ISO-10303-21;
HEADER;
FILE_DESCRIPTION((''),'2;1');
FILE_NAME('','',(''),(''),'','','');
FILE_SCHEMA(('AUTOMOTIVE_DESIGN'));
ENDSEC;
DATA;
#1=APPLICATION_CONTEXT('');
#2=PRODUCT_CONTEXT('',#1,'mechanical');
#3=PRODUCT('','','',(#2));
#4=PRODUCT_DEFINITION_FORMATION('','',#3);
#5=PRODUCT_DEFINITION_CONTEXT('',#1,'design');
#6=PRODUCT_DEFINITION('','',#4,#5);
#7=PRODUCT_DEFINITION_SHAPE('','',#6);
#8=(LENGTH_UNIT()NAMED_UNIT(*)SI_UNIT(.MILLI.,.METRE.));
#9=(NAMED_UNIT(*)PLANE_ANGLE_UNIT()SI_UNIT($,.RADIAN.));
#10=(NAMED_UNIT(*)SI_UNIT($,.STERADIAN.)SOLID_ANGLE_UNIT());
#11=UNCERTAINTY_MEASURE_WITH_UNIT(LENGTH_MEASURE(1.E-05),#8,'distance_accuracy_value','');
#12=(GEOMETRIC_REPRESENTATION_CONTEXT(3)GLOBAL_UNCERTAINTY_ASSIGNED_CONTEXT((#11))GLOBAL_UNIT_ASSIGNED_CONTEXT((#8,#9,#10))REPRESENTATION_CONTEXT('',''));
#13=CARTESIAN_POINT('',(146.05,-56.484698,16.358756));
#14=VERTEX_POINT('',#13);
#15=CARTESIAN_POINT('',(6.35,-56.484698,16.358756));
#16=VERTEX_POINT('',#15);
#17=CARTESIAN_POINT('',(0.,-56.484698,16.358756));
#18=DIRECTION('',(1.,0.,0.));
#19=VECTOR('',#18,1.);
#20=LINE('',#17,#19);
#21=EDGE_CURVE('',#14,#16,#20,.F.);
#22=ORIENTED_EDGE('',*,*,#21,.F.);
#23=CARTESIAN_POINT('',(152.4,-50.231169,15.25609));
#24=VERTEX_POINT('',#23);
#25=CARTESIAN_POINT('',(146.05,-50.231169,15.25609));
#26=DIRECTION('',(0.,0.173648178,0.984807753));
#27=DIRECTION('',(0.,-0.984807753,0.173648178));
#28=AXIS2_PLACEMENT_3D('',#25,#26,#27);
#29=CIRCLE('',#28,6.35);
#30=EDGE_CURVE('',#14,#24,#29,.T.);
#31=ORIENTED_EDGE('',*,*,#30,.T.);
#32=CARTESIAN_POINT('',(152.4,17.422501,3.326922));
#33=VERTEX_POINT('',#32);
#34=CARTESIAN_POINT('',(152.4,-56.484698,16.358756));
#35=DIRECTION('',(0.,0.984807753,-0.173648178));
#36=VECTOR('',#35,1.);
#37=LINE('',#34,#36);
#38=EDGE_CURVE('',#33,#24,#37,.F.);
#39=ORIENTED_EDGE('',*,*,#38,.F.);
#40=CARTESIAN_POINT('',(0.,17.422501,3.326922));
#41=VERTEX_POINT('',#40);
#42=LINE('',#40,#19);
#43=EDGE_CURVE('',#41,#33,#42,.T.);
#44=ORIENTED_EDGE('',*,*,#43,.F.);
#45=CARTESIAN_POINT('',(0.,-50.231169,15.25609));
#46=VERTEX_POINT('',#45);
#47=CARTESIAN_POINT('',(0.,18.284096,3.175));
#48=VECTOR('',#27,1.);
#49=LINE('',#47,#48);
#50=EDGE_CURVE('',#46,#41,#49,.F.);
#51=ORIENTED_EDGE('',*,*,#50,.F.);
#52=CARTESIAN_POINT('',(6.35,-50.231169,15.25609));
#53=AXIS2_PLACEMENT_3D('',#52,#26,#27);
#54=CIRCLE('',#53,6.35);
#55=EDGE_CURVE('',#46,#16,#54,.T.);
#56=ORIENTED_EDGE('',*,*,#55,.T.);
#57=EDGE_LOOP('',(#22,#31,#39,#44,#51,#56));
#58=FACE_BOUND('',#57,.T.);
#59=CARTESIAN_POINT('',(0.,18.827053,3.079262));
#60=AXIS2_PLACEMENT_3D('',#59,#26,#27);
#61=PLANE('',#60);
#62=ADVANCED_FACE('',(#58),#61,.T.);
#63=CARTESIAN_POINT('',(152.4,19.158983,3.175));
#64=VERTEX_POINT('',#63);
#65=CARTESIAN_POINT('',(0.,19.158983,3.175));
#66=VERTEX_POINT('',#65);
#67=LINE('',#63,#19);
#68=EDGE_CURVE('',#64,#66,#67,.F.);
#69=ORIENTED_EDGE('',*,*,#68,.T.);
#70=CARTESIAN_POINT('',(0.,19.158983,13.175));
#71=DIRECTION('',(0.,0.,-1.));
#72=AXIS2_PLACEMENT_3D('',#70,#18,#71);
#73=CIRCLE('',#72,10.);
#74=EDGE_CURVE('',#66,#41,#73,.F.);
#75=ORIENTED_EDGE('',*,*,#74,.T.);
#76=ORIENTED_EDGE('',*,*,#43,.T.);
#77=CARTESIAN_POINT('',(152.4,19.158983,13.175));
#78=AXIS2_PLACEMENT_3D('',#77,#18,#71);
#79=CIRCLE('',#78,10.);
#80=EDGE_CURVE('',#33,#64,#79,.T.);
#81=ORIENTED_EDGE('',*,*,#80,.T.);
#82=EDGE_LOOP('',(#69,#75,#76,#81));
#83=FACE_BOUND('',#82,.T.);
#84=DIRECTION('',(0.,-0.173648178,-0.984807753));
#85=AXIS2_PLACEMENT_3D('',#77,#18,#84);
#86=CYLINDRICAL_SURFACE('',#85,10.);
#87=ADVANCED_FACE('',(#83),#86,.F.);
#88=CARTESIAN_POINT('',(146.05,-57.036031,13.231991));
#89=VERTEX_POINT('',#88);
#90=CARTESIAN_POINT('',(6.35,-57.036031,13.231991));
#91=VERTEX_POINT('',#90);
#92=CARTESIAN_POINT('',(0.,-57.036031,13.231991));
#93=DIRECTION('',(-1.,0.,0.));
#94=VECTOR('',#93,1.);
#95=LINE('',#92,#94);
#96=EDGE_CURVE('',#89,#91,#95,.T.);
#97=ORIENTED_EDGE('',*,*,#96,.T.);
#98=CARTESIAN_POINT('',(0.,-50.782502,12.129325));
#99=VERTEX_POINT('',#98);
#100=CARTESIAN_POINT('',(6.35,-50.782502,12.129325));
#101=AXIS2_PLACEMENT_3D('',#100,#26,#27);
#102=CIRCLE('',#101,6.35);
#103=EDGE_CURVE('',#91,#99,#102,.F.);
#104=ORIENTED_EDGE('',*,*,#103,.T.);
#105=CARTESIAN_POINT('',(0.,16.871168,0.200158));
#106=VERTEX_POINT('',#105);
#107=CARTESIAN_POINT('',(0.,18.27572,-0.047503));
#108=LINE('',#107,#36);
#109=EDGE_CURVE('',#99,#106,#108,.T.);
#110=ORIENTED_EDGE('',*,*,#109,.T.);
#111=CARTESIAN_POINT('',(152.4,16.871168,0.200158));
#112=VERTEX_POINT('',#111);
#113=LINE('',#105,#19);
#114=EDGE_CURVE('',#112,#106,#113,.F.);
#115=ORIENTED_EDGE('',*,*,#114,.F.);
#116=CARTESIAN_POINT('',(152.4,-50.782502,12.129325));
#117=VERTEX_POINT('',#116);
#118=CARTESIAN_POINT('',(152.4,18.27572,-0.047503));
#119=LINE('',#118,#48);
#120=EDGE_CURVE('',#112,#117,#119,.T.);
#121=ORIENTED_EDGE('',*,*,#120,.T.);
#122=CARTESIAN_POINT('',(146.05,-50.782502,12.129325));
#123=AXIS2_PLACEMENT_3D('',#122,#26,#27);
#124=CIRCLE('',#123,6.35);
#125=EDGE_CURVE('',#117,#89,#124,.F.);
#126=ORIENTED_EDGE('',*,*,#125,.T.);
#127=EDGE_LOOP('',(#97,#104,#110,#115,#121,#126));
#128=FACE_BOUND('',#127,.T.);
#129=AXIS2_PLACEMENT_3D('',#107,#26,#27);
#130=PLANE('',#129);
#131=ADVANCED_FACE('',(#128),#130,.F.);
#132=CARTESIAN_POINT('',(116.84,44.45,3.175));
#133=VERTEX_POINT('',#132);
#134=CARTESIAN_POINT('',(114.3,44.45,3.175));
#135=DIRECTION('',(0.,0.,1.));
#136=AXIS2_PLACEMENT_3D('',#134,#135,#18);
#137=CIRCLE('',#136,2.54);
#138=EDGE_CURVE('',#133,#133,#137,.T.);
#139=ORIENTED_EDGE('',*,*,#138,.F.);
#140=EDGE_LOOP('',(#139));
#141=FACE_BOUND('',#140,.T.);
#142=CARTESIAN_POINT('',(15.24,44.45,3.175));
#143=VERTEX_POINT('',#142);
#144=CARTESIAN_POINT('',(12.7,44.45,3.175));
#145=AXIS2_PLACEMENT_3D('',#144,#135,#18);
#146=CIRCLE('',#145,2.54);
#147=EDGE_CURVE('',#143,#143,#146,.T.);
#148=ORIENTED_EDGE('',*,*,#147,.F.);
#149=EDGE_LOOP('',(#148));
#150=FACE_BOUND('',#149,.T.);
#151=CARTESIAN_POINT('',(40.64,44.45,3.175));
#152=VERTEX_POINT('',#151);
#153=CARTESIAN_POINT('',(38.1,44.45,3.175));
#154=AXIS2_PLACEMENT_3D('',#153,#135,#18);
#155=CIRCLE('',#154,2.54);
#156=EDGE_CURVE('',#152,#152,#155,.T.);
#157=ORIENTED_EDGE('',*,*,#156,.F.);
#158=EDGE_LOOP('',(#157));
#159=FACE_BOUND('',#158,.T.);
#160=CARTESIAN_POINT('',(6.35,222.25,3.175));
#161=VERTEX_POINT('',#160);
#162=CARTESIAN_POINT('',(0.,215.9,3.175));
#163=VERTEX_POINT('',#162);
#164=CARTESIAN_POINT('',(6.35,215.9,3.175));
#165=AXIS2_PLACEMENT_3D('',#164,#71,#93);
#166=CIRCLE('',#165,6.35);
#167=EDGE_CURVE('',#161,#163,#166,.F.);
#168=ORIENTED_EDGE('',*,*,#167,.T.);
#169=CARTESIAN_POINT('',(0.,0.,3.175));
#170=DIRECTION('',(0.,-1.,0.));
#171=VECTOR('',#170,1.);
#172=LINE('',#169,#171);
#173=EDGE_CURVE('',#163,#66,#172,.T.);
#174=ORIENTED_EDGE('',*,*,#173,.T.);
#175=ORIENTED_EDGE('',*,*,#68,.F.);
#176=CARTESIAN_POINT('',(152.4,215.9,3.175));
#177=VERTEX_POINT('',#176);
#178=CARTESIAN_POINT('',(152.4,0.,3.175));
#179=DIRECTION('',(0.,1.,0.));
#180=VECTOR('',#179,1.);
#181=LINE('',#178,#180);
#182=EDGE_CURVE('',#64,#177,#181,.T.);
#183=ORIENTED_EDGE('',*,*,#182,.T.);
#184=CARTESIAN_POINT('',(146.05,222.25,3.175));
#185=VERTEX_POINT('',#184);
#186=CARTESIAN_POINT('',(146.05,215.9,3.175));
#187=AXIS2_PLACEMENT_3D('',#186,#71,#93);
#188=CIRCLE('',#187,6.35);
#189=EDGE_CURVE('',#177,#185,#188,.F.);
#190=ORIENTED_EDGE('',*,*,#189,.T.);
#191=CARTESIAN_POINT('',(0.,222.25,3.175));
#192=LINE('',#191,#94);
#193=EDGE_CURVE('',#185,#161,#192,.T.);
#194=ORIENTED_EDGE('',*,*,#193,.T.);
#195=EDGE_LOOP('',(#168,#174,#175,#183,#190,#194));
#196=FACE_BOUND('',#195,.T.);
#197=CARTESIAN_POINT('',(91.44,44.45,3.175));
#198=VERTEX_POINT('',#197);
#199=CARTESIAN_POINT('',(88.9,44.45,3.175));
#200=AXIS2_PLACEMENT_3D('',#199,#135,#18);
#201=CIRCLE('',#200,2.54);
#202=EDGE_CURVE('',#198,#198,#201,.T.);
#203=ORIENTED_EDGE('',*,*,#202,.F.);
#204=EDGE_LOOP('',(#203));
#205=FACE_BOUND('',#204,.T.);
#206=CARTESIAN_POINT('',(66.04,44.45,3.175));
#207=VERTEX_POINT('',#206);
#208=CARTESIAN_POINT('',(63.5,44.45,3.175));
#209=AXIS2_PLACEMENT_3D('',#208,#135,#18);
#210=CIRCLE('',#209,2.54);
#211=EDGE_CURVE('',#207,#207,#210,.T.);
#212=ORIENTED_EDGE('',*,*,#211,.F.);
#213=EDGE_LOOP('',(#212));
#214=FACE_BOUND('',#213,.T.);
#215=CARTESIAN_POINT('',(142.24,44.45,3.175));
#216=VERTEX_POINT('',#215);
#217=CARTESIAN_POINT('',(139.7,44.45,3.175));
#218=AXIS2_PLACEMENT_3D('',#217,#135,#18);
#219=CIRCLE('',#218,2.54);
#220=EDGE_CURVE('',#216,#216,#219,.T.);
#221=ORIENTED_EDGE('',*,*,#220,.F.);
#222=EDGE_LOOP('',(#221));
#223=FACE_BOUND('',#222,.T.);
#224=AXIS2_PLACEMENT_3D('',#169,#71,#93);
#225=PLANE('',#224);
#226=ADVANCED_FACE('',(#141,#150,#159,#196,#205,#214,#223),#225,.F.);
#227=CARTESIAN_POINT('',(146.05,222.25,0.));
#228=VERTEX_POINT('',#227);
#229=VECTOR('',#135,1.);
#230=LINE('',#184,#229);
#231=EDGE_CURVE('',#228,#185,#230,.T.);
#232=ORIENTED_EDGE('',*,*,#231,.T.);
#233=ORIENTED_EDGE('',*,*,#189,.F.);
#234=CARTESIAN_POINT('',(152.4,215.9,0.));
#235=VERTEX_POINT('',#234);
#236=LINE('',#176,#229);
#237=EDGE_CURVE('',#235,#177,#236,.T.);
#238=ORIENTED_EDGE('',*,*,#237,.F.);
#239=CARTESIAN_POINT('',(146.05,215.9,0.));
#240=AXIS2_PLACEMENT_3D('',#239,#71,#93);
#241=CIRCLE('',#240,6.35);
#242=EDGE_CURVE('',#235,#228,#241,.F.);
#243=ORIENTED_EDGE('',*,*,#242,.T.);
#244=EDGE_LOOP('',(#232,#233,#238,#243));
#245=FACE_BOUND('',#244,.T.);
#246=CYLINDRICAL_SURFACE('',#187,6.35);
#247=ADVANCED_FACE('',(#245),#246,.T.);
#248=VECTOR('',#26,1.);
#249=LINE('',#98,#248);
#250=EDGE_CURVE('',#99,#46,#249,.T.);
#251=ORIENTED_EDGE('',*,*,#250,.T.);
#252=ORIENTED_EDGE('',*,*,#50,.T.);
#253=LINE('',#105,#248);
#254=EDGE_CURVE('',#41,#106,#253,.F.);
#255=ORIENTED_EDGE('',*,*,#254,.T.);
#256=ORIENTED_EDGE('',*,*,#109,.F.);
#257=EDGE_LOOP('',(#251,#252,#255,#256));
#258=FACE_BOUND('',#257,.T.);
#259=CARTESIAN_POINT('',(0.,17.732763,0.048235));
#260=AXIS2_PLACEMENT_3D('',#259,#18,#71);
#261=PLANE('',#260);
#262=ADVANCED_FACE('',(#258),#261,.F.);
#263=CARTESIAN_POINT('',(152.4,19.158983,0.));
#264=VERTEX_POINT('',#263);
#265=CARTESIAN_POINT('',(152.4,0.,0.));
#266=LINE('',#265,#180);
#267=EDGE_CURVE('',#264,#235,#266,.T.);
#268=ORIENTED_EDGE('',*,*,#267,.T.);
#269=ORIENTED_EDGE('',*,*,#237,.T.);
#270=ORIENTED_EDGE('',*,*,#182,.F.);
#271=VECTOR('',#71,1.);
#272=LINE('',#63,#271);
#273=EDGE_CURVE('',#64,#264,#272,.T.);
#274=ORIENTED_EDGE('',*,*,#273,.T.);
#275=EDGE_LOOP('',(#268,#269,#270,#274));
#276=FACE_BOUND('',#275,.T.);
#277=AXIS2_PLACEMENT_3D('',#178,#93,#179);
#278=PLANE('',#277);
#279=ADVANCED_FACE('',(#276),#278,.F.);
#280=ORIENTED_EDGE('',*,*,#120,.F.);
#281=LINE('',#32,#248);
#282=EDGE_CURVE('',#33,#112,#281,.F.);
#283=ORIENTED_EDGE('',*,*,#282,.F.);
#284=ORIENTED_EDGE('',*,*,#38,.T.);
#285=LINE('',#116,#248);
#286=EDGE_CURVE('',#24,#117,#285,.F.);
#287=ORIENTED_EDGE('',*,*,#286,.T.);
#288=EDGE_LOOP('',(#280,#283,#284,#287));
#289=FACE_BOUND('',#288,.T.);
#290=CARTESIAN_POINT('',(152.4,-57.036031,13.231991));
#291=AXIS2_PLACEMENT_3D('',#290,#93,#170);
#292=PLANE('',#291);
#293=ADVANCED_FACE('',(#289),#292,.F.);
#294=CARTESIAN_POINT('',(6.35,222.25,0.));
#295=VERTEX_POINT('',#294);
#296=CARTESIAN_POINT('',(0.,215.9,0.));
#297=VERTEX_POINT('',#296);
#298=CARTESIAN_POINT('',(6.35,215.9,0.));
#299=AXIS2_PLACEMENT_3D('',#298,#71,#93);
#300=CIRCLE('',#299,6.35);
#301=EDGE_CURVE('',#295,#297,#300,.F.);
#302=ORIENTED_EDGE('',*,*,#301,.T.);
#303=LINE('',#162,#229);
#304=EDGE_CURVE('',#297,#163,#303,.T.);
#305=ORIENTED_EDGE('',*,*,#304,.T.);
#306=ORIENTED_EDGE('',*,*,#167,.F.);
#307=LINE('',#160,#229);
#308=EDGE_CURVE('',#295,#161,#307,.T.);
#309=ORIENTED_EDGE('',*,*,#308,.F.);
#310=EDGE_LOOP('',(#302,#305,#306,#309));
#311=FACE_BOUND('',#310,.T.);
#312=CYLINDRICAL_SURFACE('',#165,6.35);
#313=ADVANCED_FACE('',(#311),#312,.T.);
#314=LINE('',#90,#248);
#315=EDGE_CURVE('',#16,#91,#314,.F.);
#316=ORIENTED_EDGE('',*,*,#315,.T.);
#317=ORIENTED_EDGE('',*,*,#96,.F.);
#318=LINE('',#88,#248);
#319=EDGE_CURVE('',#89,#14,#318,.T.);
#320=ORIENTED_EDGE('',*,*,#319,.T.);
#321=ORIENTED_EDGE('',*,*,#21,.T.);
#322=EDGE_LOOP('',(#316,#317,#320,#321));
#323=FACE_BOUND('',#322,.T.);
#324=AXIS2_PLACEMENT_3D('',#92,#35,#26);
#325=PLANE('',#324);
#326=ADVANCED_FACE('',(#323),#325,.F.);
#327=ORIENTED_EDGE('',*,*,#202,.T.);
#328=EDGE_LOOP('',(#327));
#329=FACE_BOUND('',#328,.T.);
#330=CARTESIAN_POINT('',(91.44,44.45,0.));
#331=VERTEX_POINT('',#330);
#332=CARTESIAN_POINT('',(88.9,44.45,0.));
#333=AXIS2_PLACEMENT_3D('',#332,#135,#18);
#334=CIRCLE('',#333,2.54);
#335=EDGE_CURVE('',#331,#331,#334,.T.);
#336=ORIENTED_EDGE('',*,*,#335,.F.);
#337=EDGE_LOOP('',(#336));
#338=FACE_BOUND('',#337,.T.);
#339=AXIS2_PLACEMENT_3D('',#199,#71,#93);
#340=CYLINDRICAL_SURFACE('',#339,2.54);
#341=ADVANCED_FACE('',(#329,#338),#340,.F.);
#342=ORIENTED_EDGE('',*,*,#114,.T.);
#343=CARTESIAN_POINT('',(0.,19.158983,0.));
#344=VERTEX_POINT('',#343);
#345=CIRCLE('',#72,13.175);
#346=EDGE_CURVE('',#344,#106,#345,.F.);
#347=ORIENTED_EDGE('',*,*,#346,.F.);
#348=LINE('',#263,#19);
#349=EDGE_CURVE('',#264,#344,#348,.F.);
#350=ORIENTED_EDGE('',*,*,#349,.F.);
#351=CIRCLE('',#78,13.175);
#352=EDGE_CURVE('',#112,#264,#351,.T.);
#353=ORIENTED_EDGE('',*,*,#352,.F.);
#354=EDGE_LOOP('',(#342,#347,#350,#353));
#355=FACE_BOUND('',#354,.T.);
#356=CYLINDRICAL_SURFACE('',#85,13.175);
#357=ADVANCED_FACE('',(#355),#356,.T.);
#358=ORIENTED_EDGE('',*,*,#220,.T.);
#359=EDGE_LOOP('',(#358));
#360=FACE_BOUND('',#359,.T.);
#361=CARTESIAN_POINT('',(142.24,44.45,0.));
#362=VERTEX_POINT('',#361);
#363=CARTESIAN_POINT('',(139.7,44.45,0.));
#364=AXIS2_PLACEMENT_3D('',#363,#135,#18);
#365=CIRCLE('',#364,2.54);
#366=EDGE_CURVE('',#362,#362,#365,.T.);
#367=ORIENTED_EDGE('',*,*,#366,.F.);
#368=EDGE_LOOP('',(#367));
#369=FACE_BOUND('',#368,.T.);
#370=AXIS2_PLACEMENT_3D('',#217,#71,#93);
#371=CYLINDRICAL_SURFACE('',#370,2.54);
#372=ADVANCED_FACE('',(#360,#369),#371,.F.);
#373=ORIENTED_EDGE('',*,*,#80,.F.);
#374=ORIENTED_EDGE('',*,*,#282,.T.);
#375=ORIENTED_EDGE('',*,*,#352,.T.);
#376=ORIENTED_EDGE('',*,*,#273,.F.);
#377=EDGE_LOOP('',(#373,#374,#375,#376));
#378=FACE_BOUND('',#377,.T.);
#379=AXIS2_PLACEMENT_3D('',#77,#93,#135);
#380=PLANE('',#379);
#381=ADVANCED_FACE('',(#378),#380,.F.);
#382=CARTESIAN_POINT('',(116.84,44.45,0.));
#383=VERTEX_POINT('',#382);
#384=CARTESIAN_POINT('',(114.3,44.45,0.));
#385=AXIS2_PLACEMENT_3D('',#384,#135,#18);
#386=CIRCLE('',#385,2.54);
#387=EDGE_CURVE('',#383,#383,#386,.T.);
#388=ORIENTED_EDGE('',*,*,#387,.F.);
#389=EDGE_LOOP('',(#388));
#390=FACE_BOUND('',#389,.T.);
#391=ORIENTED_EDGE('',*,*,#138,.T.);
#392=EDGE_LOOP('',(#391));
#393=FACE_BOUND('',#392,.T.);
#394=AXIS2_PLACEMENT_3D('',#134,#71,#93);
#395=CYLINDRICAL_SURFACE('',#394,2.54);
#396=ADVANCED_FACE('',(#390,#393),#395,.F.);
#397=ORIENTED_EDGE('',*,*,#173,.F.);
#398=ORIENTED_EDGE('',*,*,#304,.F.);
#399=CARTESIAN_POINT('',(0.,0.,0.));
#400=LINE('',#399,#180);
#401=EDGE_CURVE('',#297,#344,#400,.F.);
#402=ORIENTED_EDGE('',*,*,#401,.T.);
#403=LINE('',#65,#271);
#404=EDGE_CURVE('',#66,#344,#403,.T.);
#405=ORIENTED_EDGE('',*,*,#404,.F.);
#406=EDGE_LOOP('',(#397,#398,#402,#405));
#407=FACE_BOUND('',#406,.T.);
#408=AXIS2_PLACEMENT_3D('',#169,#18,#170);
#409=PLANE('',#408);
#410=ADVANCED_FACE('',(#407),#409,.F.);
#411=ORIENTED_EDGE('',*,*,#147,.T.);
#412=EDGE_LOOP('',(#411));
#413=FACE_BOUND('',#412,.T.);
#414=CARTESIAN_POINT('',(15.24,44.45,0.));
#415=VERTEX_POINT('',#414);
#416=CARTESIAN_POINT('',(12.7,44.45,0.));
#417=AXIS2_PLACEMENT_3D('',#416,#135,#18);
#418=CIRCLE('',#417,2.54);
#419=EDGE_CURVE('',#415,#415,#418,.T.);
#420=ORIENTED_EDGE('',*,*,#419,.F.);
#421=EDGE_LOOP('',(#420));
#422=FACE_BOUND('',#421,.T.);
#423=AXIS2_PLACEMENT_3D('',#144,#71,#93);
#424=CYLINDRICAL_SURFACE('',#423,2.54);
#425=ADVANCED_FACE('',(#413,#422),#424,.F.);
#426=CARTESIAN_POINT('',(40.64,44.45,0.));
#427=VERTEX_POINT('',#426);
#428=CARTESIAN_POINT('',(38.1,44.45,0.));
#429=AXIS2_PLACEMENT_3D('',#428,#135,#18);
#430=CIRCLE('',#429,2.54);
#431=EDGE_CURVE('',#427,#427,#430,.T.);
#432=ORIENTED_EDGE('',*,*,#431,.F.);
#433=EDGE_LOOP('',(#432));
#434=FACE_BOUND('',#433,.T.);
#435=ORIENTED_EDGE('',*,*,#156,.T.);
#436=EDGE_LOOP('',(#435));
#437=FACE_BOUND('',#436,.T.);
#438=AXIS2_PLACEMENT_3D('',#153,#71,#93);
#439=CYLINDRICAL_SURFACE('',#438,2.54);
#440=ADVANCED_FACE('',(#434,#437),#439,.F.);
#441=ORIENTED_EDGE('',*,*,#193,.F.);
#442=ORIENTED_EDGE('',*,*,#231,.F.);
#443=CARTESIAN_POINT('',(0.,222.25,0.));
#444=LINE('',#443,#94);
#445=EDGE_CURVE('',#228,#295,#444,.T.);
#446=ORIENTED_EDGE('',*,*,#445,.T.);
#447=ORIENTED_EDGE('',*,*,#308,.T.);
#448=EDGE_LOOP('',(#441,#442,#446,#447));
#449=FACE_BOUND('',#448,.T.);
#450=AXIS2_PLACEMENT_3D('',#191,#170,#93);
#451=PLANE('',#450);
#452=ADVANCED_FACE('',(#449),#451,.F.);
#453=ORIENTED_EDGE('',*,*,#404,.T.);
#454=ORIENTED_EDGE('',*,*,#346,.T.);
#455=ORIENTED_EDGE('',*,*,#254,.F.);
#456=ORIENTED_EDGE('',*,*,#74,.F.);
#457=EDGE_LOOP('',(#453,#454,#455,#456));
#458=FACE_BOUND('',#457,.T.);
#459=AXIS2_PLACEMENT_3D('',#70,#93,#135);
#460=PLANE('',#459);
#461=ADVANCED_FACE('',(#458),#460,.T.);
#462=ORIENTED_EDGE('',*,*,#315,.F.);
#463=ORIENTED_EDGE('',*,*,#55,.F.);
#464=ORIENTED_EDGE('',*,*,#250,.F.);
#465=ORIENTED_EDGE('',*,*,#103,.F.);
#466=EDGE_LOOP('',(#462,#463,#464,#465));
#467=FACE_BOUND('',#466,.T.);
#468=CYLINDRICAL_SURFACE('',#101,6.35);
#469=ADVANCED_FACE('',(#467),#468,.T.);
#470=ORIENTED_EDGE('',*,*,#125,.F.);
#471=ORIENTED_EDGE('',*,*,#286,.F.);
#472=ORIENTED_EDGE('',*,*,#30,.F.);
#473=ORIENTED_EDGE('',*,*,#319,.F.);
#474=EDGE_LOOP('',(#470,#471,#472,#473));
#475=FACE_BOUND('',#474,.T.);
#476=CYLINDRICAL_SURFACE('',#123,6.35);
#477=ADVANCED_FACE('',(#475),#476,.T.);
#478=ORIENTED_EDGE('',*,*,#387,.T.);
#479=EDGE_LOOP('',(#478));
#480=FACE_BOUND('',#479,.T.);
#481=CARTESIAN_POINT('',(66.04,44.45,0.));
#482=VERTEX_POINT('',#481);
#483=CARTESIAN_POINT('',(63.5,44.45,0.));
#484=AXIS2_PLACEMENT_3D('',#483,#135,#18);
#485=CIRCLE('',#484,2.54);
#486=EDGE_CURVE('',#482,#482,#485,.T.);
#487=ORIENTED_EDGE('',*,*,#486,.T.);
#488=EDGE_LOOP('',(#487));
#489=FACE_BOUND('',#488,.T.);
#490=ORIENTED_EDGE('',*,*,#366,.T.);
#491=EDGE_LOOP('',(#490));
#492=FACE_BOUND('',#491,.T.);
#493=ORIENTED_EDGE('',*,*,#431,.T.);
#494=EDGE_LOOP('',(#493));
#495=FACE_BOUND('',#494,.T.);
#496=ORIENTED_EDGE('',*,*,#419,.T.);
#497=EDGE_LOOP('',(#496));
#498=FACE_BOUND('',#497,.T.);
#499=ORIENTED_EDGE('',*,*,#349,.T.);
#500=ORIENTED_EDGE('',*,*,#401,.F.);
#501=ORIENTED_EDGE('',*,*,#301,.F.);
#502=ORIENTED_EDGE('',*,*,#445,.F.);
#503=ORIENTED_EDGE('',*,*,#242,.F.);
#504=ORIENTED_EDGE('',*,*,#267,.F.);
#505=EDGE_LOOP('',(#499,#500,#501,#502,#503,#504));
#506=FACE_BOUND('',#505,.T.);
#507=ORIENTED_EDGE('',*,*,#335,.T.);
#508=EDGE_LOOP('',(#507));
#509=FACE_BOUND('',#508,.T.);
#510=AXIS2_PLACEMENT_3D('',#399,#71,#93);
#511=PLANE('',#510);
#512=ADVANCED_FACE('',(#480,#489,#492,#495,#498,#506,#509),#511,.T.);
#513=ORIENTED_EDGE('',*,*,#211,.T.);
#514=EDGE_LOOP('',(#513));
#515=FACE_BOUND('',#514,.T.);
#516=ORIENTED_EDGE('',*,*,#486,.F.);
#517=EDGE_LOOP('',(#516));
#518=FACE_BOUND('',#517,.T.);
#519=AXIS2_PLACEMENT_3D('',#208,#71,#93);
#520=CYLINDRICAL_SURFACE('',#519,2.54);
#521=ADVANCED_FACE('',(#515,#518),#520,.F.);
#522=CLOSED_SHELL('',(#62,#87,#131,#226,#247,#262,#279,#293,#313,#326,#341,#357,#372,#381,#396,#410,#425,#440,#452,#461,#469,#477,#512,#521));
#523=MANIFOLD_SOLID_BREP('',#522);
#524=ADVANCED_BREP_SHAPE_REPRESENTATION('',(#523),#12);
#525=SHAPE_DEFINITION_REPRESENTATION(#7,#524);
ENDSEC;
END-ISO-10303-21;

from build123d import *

# Parameters (mm, degrees)
SKETCH1_W            = 152.4
SKETCH1_H            = 222.25
SKETCH1_R            = 2.54
BOSS_EXTRUDE1_DEPTH  = 3.175
FILLET1_R            = 6.35
EDGE_FLANGE1_DEPTH   = 152.4
EDGE_FLANGE1_2_DEPTH = 152.4
FILLET2_R            = 6.35


# Read off the part's stored shape, not the designer's step: Edge-Flange1
with BuildPart() as part:
    # Sketch1 → Boss-Extrude1 (new body)
    with BuildSketch(Plane.XY):
        with Locations((76.2, 111.125)):
            Rectangle(SKETCH1_W, SKETCH1_H)
        with Locations((12.7, 44.45)):
            Circle(SKETCH1_R, mode=Mode.SUBTRACT)
        with Locations((38.1, 44.45)):
            Circle(SKETCH1_R, mode=Mode.SUBTRACT)
        with Locations((63.5, 44.45)):
            Circle(SKETCH1_R, mode=Mode.SUBTRACT)
        with Locations((88.9, 44.45)):
            Circle(SKETCH1_R, mode=Mode.SUBTRACT)
        with Locations((114.3, 44.45)):
            Circle(SKETCH1_R, mode=Mode.SUBTRACT)
        with Locations((139.7, 44.45)):
            Circle(SKETCH1_R, mode=Mode.SUBTRACT)
    extrude(amount=BOSS_EXTRUDE1_DEPTH)

    # Fillet1
    fillet1_edges = [part.edges().sort_by_distance(p)[0] for p in [
        (0, 222.25, 1.5875),
        (152.4, 222.25, 1.5875),
    ]]
    fillet(fillet1_edges, radius=FILLET1_R)

    # Edge-Flange1 outline → Edge-Flange1 (cut)
    with BuildSketch(Plane.YZ):
        with BuildLine():
            ThreePointArc((19.158982919, 0), (18.010706008, 0.050134853), (16.871168178, 0.200157854))
            Line((16.871168178, 0.200157854), (0, 3.175))
            Line((0, 3.175), (0, 0))
            Line((0, 0), (19.158982919, 0))
        make_face()
    extrude(amount=EDGE_FLANGE1_DEPTH, mode=Mode.SUBTRACT)

    # Edge-Flange1 2 outline → Edge-Flange1 2 (add)
    with BuildSketch(Plane.YZ):
        with BuildLine():
            Line((-57.036031002, 13.231991138), (0, 3.175))
            Line((0, 3.175), (19.158982919, 3.175))
            ThreePointArc((19.158982919, 3.175), (18.287425492, 3.213053019), (17.422501143, 3.32692247))
            Line((17.422501143, 3.32692247), (-56.484698038, 16.358755754))
            Line((-56.484698038, 16.358755754), (-57.036031002, 13.231991138))
        make_face()
    extrude(amount=EDGE_FLANGE1_2_DEPTH)

    # Fillet2
    fillet2_edges = [part.edges().sort_by_distance(p)[0] for p in [
        (0, -56.76036452, 14.795373446),
        (152.4, -56.76036452, 14.795373446),
    ]]
    fillet(fillet2_edges, radius=FILLET2_R)


solid = part.part
